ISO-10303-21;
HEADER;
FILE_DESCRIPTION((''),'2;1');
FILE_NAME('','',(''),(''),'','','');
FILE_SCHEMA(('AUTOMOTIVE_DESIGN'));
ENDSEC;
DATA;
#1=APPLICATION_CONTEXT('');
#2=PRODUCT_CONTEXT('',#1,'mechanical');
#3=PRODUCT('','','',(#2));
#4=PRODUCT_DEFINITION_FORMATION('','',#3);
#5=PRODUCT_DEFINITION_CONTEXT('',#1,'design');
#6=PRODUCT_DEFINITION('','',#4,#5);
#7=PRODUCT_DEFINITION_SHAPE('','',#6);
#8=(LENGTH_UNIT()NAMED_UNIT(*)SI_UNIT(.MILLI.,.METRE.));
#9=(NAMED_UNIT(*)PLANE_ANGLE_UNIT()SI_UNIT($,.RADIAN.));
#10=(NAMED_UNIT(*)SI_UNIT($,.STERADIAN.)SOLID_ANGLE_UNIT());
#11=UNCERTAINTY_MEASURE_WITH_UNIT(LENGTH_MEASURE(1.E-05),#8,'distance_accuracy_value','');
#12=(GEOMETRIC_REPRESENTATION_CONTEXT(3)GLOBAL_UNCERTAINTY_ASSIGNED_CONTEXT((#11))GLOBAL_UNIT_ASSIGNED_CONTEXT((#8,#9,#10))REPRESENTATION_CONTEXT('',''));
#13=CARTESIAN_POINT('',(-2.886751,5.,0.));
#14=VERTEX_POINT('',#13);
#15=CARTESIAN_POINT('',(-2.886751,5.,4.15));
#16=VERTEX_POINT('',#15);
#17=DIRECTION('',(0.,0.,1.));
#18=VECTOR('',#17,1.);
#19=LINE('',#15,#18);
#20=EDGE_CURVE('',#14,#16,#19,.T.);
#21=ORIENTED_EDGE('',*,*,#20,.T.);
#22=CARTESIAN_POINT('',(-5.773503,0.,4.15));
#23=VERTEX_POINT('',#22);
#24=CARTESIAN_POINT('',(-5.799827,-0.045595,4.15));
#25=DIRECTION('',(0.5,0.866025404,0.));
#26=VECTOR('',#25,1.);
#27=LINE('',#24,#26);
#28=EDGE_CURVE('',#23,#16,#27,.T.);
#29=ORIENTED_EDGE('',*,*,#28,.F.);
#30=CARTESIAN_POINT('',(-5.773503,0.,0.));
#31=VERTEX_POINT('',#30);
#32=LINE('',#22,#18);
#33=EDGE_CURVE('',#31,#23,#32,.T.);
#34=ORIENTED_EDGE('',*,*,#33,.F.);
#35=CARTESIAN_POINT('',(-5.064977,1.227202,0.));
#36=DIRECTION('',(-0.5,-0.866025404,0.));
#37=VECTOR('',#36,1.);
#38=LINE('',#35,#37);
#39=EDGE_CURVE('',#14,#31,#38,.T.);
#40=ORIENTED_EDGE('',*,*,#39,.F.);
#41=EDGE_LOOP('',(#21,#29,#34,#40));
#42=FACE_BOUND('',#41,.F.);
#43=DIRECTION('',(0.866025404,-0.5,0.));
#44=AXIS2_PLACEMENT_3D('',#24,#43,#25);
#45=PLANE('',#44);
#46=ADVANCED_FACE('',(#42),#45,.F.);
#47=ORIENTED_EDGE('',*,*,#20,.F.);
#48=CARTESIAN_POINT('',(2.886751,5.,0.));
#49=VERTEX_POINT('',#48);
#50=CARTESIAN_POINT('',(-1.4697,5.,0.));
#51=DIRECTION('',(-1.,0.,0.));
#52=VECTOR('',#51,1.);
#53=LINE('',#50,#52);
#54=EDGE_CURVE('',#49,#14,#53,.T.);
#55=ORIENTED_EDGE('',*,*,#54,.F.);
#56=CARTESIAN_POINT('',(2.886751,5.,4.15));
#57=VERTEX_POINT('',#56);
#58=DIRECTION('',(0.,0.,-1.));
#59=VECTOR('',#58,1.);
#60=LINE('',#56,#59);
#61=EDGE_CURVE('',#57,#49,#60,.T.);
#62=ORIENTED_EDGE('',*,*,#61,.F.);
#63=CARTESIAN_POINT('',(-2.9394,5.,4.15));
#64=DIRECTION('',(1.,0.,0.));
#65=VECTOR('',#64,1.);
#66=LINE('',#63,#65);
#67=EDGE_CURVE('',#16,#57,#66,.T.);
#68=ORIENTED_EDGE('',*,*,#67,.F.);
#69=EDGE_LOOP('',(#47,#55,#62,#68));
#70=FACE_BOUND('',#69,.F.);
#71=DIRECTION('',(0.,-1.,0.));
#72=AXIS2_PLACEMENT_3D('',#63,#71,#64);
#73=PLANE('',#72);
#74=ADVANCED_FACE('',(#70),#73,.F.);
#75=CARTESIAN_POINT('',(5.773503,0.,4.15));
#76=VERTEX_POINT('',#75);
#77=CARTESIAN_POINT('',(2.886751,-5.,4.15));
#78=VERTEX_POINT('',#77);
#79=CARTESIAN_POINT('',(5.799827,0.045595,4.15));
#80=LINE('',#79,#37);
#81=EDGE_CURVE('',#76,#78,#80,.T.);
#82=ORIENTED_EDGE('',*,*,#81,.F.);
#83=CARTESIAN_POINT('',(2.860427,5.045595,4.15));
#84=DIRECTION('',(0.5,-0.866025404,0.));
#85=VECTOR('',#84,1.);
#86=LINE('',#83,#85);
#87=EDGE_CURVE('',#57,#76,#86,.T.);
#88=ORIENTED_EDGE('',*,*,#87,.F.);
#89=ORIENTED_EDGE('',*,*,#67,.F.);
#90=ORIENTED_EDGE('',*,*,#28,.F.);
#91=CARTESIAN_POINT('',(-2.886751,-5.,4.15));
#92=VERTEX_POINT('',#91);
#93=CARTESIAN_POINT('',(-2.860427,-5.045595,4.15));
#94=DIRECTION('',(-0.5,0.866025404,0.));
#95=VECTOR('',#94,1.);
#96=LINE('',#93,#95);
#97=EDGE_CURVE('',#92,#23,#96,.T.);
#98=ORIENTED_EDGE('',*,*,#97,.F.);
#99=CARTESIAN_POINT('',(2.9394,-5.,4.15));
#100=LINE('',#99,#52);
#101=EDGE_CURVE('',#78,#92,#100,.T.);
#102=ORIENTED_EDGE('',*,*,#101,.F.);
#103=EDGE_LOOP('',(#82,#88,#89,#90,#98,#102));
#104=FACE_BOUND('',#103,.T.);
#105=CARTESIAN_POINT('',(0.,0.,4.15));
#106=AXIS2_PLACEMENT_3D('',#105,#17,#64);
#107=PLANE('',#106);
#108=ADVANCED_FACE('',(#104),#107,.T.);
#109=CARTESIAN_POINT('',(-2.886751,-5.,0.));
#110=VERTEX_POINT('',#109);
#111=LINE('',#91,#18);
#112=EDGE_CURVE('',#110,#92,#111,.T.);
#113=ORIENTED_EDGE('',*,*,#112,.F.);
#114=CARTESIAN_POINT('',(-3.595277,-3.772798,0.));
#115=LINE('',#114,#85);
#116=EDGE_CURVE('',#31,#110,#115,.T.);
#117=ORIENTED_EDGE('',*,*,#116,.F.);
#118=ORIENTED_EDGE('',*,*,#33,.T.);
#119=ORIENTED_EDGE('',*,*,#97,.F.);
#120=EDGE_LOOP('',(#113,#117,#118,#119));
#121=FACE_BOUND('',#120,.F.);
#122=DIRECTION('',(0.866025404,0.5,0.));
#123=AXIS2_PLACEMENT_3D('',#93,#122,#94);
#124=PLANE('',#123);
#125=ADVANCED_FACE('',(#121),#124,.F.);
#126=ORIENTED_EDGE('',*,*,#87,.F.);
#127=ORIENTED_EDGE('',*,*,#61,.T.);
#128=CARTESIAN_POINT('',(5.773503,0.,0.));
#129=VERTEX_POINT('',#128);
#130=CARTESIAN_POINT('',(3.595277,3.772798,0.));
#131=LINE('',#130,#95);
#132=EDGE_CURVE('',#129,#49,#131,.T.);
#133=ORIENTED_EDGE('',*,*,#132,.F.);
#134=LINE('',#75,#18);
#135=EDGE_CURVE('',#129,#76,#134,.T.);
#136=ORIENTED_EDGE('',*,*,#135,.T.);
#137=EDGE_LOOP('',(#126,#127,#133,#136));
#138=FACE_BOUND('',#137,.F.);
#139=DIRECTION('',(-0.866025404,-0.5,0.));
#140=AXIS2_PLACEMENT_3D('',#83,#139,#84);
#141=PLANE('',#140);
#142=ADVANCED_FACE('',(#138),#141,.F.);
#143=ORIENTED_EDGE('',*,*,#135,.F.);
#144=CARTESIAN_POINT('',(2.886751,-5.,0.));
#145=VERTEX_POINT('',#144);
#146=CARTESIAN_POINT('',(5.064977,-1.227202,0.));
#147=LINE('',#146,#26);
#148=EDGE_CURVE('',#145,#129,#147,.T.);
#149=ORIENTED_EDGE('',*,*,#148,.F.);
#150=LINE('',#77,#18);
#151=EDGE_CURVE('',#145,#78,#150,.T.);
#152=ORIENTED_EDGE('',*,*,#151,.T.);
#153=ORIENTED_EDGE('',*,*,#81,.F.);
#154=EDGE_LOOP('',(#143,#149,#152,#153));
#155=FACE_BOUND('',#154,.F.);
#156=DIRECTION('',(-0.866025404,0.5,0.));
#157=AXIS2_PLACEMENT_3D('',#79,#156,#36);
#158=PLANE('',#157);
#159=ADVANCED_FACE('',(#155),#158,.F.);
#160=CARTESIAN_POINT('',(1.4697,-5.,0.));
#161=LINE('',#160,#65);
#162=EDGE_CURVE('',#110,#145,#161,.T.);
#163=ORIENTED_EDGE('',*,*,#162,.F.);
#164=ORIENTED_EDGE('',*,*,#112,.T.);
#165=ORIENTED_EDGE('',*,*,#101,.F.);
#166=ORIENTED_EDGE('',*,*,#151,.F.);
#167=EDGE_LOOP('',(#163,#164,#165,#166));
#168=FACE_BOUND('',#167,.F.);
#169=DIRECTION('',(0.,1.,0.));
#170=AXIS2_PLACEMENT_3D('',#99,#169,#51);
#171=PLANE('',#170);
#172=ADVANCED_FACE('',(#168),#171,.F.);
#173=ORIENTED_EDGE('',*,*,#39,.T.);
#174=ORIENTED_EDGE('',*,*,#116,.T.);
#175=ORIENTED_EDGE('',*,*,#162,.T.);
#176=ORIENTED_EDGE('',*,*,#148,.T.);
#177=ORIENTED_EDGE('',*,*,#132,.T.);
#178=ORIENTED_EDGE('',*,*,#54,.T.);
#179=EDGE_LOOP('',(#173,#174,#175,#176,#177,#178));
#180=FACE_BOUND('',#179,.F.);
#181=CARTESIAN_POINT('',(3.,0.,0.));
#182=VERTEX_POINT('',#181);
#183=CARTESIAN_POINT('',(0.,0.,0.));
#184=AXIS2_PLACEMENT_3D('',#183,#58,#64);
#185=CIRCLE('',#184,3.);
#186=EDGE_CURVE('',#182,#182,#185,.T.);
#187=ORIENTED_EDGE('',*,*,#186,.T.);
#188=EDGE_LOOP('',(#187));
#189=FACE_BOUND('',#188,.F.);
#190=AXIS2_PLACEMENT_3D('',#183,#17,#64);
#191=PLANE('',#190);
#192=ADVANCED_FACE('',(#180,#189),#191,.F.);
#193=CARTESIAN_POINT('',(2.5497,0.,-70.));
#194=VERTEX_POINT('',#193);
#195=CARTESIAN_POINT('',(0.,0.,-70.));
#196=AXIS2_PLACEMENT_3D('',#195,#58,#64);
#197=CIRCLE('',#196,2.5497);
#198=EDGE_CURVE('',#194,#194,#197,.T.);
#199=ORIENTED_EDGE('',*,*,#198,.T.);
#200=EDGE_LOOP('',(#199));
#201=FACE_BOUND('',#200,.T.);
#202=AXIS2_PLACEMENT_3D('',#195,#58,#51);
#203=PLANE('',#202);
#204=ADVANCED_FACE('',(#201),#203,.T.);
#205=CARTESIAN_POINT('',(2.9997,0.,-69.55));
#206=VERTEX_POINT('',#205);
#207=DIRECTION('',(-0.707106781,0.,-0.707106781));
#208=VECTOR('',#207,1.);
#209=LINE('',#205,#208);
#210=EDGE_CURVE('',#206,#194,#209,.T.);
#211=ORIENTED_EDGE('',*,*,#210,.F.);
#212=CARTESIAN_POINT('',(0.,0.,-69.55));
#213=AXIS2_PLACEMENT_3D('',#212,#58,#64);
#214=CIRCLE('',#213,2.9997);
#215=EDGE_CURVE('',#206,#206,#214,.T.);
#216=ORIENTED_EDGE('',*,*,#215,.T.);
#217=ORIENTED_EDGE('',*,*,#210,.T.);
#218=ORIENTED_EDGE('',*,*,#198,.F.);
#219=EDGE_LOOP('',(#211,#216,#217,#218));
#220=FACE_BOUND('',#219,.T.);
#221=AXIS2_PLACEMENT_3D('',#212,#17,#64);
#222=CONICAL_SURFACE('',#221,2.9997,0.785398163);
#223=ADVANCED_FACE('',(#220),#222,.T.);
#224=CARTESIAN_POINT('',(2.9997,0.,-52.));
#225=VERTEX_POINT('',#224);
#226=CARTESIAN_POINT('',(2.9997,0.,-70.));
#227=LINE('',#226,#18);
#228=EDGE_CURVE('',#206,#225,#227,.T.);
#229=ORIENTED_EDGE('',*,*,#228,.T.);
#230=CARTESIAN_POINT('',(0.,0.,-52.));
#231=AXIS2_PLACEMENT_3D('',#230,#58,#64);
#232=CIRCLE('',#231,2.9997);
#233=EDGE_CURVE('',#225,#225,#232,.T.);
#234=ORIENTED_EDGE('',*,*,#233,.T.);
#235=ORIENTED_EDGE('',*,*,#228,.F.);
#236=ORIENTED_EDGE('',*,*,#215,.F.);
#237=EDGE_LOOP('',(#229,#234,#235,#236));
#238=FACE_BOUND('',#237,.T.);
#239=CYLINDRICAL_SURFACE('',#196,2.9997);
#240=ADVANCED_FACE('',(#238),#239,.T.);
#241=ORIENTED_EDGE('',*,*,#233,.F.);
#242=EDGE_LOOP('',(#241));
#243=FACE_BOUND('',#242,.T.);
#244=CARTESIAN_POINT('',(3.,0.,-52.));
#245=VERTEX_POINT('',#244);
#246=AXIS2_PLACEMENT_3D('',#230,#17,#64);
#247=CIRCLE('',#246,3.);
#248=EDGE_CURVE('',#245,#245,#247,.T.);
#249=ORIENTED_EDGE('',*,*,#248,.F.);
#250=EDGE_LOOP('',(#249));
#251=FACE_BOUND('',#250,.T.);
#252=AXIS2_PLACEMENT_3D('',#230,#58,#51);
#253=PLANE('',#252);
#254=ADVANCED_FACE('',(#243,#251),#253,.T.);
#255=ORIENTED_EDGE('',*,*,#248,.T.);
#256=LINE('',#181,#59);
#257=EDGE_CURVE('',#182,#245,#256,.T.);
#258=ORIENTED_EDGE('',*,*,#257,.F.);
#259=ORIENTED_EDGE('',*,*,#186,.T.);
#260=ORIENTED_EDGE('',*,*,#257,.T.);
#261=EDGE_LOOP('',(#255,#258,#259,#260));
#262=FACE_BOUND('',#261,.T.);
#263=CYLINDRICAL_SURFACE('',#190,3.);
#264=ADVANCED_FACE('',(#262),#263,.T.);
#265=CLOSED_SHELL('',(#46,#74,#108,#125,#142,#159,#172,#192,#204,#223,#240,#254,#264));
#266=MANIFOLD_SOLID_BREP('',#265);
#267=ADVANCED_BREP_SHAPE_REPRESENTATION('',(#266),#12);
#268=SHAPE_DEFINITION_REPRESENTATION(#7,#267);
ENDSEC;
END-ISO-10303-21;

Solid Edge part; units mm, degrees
sketch "Sketch1" plane through (0, 0, 0) normal (0, 0, 1) x (1, 0, 0)
  circle A0 centre (0, 0) radius 5.8
  dimension "D1" = 11.6
extrude "Protrusion1" add sketch "Sketch1" along normal blind 4.15
sketch "Sketch2" plane through (0, 0, 0) normal (0, 0, -1) x (1, 0, 0)
  circle A0 centre (0, 0) radius 3
extrude "Protrusion2" add sketch "Sketch2" along normal blind 70
sketch "Sketch3" plane through (0, 0, -70) normal (0, 0, -1) x (1, 0, 0)
  circle A0 centre (0, 0) radius 2.9997
extrude "Cutout1" cut sketch "Sketch3" against normal blind 18 flip side to cut
chamfer "Chamfer_1" distance 0.45 angle 45 1 edges at (-2.9997, 0, -70)
sketch "Sketch4" plane through (0, 0, 4.15) normal (0, 0, 1) x (1, 0, 0)
  line L0 (-2.9394, 5) -> (2.9394, 5)
  dimension "D1" = 10
extrude "Cutout2" cut sketch "Sketch4" against normal up to next material side at (0, 5.05, 4.15)
pattern_circular "Pattern1" count 6 over 360 about axis through (0, 0, 4.15) along (0, 0, 1) of "Cutout2"
properties part number "24101450"
